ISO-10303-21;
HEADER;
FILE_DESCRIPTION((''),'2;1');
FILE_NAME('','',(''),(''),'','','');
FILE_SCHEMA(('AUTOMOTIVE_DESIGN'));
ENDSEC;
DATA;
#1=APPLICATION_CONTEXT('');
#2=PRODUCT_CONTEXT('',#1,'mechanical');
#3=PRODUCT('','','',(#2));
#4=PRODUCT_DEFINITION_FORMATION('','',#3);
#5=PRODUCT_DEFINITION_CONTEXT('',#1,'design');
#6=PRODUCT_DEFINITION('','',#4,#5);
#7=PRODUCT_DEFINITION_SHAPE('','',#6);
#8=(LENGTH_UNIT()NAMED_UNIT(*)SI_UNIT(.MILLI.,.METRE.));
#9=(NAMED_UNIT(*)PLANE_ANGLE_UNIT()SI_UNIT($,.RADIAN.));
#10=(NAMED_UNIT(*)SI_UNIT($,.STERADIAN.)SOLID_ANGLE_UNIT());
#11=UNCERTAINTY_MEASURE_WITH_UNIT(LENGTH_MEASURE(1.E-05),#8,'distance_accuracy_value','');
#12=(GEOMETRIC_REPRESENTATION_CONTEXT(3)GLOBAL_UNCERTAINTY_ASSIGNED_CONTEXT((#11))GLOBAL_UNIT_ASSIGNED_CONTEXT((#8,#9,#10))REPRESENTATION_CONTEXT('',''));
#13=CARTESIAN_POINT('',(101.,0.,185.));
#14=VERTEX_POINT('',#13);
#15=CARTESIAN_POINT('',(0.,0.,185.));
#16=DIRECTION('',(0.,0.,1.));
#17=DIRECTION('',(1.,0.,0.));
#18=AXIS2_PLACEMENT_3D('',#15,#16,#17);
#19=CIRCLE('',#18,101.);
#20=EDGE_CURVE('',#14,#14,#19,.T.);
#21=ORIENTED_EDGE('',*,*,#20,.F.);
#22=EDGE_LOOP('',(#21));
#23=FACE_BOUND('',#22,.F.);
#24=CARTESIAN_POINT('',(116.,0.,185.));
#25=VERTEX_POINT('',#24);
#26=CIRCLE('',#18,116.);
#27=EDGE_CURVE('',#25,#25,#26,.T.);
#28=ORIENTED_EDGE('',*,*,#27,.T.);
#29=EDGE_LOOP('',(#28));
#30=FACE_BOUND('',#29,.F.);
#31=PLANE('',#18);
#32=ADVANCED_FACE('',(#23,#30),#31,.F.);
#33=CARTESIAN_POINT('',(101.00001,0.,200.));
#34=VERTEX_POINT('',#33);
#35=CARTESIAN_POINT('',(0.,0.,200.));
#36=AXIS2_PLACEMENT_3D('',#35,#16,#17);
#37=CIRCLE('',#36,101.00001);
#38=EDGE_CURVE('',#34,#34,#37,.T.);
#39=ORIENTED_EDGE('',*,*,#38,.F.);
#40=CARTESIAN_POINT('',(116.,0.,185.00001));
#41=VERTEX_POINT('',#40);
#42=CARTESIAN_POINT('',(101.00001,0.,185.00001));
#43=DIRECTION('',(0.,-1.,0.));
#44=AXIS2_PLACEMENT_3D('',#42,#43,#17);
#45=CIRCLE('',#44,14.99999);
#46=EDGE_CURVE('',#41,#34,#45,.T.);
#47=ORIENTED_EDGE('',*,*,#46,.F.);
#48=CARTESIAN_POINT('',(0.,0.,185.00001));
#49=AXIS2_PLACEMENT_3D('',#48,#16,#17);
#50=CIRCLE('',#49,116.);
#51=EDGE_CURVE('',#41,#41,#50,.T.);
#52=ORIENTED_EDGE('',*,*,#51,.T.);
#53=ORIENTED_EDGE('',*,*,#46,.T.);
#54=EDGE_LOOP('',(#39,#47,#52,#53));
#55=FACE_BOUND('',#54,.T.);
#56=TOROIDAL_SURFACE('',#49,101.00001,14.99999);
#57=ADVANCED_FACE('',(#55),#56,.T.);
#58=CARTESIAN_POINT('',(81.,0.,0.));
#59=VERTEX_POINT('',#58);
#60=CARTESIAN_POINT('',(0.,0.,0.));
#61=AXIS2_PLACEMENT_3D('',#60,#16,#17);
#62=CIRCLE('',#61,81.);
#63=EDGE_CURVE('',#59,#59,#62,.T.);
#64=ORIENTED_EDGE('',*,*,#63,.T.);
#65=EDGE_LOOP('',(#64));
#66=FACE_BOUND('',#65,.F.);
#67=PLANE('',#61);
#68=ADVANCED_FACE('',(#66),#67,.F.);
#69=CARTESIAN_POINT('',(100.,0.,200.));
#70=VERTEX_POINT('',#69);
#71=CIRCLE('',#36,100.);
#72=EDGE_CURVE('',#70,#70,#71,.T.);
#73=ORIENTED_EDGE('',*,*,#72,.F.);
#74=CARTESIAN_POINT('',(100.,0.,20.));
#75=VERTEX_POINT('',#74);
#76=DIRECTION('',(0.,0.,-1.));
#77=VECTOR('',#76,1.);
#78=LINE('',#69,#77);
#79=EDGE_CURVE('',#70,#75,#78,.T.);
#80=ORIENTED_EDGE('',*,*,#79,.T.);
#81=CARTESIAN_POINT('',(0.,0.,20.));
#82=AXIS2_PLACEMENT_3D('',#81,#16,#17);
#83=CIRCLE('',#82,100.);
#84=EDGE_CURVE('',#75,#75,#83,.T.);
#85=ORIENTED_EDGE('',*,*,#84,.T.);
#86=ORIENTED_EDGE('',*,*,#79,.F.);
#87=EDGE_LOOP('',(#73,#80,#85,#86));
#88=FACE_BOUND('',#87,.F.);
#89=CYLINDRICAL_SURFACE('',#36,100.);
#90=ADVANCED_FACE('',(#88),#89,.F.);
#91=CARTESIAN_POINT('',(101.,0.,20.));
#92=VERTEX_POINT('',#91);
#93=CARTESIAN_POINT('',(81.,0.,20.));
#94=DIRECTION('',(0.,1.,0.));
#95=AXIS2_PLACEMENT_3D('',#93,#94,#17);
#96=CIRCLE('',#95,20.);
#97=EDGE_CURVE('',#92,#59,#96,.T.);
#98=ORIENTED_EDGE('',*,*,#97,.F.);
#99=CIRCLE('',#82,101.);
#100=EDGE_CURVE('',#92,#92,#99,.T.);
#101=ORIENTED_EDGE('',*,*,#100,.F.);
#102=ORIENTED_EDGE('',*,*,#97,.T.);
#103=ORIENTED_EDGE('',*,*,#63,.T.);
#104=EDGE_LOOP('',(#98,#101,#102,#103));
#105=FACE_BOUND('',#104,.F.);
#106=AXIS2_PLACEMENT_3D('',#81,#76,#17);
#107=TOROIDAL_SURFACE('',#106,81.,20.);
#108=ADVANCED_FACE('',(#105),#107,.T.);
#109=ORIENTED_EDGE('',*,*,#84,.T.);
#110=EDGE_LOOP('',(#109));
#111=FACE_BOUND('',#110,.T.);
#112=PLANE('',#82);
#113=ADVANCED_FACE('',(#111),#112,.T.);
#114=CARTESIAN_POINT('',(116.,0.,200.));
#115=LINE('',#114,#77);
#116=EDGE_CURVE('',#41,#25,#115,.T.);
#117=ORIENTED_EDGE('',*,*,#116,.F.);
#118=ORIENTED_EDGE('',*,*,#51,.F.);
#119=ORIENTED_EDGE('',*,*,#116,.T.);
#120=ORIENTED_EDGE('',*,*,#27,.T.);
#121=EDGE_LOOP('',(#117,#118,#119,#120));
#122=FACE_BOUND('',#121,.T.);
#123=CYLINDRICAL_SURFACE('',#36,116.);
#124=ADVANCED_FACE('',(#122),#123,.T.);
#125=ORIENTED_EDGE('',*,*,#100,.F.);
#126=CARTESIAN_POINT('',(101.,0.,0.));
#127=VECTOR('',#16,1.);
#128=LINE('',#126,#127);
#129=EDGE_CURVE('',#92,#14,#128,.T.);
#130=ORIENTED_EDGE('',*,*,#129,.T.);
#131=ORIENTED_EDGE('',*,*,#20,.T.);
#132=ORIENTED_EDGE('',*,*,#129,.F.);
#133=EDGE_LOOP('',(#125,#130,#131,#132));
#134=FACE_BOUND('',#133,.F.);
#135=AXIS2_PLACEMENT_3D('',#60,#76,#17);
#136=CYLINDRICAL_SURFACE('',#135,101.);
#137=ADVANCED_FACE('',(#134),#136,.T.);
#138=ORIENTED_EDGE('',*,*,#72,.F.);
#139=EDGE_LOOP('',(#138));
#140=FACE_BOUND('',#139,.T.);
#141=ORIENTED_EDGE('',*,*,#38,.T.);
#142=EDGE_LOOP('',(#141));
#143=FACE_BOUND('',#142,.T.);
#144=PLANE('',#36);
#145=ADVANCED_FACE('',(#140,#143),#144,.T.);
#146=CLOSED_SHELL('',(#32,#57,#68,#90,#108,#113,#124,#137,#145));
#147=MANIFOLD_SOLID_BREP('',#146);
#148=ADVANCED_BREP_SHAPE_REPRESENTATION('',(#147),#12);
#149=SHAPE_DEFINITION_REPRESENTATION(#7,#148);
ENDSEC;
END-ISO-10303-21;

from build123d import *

# Parameters (mm, degrees)
F0_R     = 101
F1_DEPTH = 200
F2_R     = 20
F3_R     = 100
F4_DEPTH = 180
F5_R     = 116
F5_R_2   = 101
F6_DEPTH = 15
F7_R     = 14.99999


# Not quite as in the source:
# - a fillet or chamfer is up to 0.001 mm smaller than in the source, because OpenCascade refuses the exact size


with BuildPart() as f1:
    # F0 (on Top) → F1 (new body)
    with BuildSketch(Plane.XY):
        Circle(F0_R)
    extrude(amount=F1_DEPTH)

    # F2
    f2_edges = [f1.edges().sort_by_distance(p)[0] for p in [
        (-101, 0, 0),
    ]]
    fillet(f2_edges, radius=F2_R)

    # F3 (on face) → F4 (cut)
    with BuildSketch(Plane.XY.offset(200)):
        Circle(F3_R)
    extrude(amount=-F4_DEPTH, mode=Mode.SUBTRACT)

    # F5 (on face) → F6 (join)
    with BuildSketch(Plane.XY.offset(200)):
        Circle(F5_R)
        Circle(F5_R_2, mode=Mode.SUBTRACT)
    extrude(amount=-F6_DEPTH)

    # F7 (radius 15 in the source; OpenCascade refuses exactly that, so slightly less here)
    f7_edges = [f1.edges().sort_by_distance(p)[0] for p in [
        (-116, 0, 200),
    ]]
    fillet(f7_edges, radius=F7_R)


solid = f1.part
